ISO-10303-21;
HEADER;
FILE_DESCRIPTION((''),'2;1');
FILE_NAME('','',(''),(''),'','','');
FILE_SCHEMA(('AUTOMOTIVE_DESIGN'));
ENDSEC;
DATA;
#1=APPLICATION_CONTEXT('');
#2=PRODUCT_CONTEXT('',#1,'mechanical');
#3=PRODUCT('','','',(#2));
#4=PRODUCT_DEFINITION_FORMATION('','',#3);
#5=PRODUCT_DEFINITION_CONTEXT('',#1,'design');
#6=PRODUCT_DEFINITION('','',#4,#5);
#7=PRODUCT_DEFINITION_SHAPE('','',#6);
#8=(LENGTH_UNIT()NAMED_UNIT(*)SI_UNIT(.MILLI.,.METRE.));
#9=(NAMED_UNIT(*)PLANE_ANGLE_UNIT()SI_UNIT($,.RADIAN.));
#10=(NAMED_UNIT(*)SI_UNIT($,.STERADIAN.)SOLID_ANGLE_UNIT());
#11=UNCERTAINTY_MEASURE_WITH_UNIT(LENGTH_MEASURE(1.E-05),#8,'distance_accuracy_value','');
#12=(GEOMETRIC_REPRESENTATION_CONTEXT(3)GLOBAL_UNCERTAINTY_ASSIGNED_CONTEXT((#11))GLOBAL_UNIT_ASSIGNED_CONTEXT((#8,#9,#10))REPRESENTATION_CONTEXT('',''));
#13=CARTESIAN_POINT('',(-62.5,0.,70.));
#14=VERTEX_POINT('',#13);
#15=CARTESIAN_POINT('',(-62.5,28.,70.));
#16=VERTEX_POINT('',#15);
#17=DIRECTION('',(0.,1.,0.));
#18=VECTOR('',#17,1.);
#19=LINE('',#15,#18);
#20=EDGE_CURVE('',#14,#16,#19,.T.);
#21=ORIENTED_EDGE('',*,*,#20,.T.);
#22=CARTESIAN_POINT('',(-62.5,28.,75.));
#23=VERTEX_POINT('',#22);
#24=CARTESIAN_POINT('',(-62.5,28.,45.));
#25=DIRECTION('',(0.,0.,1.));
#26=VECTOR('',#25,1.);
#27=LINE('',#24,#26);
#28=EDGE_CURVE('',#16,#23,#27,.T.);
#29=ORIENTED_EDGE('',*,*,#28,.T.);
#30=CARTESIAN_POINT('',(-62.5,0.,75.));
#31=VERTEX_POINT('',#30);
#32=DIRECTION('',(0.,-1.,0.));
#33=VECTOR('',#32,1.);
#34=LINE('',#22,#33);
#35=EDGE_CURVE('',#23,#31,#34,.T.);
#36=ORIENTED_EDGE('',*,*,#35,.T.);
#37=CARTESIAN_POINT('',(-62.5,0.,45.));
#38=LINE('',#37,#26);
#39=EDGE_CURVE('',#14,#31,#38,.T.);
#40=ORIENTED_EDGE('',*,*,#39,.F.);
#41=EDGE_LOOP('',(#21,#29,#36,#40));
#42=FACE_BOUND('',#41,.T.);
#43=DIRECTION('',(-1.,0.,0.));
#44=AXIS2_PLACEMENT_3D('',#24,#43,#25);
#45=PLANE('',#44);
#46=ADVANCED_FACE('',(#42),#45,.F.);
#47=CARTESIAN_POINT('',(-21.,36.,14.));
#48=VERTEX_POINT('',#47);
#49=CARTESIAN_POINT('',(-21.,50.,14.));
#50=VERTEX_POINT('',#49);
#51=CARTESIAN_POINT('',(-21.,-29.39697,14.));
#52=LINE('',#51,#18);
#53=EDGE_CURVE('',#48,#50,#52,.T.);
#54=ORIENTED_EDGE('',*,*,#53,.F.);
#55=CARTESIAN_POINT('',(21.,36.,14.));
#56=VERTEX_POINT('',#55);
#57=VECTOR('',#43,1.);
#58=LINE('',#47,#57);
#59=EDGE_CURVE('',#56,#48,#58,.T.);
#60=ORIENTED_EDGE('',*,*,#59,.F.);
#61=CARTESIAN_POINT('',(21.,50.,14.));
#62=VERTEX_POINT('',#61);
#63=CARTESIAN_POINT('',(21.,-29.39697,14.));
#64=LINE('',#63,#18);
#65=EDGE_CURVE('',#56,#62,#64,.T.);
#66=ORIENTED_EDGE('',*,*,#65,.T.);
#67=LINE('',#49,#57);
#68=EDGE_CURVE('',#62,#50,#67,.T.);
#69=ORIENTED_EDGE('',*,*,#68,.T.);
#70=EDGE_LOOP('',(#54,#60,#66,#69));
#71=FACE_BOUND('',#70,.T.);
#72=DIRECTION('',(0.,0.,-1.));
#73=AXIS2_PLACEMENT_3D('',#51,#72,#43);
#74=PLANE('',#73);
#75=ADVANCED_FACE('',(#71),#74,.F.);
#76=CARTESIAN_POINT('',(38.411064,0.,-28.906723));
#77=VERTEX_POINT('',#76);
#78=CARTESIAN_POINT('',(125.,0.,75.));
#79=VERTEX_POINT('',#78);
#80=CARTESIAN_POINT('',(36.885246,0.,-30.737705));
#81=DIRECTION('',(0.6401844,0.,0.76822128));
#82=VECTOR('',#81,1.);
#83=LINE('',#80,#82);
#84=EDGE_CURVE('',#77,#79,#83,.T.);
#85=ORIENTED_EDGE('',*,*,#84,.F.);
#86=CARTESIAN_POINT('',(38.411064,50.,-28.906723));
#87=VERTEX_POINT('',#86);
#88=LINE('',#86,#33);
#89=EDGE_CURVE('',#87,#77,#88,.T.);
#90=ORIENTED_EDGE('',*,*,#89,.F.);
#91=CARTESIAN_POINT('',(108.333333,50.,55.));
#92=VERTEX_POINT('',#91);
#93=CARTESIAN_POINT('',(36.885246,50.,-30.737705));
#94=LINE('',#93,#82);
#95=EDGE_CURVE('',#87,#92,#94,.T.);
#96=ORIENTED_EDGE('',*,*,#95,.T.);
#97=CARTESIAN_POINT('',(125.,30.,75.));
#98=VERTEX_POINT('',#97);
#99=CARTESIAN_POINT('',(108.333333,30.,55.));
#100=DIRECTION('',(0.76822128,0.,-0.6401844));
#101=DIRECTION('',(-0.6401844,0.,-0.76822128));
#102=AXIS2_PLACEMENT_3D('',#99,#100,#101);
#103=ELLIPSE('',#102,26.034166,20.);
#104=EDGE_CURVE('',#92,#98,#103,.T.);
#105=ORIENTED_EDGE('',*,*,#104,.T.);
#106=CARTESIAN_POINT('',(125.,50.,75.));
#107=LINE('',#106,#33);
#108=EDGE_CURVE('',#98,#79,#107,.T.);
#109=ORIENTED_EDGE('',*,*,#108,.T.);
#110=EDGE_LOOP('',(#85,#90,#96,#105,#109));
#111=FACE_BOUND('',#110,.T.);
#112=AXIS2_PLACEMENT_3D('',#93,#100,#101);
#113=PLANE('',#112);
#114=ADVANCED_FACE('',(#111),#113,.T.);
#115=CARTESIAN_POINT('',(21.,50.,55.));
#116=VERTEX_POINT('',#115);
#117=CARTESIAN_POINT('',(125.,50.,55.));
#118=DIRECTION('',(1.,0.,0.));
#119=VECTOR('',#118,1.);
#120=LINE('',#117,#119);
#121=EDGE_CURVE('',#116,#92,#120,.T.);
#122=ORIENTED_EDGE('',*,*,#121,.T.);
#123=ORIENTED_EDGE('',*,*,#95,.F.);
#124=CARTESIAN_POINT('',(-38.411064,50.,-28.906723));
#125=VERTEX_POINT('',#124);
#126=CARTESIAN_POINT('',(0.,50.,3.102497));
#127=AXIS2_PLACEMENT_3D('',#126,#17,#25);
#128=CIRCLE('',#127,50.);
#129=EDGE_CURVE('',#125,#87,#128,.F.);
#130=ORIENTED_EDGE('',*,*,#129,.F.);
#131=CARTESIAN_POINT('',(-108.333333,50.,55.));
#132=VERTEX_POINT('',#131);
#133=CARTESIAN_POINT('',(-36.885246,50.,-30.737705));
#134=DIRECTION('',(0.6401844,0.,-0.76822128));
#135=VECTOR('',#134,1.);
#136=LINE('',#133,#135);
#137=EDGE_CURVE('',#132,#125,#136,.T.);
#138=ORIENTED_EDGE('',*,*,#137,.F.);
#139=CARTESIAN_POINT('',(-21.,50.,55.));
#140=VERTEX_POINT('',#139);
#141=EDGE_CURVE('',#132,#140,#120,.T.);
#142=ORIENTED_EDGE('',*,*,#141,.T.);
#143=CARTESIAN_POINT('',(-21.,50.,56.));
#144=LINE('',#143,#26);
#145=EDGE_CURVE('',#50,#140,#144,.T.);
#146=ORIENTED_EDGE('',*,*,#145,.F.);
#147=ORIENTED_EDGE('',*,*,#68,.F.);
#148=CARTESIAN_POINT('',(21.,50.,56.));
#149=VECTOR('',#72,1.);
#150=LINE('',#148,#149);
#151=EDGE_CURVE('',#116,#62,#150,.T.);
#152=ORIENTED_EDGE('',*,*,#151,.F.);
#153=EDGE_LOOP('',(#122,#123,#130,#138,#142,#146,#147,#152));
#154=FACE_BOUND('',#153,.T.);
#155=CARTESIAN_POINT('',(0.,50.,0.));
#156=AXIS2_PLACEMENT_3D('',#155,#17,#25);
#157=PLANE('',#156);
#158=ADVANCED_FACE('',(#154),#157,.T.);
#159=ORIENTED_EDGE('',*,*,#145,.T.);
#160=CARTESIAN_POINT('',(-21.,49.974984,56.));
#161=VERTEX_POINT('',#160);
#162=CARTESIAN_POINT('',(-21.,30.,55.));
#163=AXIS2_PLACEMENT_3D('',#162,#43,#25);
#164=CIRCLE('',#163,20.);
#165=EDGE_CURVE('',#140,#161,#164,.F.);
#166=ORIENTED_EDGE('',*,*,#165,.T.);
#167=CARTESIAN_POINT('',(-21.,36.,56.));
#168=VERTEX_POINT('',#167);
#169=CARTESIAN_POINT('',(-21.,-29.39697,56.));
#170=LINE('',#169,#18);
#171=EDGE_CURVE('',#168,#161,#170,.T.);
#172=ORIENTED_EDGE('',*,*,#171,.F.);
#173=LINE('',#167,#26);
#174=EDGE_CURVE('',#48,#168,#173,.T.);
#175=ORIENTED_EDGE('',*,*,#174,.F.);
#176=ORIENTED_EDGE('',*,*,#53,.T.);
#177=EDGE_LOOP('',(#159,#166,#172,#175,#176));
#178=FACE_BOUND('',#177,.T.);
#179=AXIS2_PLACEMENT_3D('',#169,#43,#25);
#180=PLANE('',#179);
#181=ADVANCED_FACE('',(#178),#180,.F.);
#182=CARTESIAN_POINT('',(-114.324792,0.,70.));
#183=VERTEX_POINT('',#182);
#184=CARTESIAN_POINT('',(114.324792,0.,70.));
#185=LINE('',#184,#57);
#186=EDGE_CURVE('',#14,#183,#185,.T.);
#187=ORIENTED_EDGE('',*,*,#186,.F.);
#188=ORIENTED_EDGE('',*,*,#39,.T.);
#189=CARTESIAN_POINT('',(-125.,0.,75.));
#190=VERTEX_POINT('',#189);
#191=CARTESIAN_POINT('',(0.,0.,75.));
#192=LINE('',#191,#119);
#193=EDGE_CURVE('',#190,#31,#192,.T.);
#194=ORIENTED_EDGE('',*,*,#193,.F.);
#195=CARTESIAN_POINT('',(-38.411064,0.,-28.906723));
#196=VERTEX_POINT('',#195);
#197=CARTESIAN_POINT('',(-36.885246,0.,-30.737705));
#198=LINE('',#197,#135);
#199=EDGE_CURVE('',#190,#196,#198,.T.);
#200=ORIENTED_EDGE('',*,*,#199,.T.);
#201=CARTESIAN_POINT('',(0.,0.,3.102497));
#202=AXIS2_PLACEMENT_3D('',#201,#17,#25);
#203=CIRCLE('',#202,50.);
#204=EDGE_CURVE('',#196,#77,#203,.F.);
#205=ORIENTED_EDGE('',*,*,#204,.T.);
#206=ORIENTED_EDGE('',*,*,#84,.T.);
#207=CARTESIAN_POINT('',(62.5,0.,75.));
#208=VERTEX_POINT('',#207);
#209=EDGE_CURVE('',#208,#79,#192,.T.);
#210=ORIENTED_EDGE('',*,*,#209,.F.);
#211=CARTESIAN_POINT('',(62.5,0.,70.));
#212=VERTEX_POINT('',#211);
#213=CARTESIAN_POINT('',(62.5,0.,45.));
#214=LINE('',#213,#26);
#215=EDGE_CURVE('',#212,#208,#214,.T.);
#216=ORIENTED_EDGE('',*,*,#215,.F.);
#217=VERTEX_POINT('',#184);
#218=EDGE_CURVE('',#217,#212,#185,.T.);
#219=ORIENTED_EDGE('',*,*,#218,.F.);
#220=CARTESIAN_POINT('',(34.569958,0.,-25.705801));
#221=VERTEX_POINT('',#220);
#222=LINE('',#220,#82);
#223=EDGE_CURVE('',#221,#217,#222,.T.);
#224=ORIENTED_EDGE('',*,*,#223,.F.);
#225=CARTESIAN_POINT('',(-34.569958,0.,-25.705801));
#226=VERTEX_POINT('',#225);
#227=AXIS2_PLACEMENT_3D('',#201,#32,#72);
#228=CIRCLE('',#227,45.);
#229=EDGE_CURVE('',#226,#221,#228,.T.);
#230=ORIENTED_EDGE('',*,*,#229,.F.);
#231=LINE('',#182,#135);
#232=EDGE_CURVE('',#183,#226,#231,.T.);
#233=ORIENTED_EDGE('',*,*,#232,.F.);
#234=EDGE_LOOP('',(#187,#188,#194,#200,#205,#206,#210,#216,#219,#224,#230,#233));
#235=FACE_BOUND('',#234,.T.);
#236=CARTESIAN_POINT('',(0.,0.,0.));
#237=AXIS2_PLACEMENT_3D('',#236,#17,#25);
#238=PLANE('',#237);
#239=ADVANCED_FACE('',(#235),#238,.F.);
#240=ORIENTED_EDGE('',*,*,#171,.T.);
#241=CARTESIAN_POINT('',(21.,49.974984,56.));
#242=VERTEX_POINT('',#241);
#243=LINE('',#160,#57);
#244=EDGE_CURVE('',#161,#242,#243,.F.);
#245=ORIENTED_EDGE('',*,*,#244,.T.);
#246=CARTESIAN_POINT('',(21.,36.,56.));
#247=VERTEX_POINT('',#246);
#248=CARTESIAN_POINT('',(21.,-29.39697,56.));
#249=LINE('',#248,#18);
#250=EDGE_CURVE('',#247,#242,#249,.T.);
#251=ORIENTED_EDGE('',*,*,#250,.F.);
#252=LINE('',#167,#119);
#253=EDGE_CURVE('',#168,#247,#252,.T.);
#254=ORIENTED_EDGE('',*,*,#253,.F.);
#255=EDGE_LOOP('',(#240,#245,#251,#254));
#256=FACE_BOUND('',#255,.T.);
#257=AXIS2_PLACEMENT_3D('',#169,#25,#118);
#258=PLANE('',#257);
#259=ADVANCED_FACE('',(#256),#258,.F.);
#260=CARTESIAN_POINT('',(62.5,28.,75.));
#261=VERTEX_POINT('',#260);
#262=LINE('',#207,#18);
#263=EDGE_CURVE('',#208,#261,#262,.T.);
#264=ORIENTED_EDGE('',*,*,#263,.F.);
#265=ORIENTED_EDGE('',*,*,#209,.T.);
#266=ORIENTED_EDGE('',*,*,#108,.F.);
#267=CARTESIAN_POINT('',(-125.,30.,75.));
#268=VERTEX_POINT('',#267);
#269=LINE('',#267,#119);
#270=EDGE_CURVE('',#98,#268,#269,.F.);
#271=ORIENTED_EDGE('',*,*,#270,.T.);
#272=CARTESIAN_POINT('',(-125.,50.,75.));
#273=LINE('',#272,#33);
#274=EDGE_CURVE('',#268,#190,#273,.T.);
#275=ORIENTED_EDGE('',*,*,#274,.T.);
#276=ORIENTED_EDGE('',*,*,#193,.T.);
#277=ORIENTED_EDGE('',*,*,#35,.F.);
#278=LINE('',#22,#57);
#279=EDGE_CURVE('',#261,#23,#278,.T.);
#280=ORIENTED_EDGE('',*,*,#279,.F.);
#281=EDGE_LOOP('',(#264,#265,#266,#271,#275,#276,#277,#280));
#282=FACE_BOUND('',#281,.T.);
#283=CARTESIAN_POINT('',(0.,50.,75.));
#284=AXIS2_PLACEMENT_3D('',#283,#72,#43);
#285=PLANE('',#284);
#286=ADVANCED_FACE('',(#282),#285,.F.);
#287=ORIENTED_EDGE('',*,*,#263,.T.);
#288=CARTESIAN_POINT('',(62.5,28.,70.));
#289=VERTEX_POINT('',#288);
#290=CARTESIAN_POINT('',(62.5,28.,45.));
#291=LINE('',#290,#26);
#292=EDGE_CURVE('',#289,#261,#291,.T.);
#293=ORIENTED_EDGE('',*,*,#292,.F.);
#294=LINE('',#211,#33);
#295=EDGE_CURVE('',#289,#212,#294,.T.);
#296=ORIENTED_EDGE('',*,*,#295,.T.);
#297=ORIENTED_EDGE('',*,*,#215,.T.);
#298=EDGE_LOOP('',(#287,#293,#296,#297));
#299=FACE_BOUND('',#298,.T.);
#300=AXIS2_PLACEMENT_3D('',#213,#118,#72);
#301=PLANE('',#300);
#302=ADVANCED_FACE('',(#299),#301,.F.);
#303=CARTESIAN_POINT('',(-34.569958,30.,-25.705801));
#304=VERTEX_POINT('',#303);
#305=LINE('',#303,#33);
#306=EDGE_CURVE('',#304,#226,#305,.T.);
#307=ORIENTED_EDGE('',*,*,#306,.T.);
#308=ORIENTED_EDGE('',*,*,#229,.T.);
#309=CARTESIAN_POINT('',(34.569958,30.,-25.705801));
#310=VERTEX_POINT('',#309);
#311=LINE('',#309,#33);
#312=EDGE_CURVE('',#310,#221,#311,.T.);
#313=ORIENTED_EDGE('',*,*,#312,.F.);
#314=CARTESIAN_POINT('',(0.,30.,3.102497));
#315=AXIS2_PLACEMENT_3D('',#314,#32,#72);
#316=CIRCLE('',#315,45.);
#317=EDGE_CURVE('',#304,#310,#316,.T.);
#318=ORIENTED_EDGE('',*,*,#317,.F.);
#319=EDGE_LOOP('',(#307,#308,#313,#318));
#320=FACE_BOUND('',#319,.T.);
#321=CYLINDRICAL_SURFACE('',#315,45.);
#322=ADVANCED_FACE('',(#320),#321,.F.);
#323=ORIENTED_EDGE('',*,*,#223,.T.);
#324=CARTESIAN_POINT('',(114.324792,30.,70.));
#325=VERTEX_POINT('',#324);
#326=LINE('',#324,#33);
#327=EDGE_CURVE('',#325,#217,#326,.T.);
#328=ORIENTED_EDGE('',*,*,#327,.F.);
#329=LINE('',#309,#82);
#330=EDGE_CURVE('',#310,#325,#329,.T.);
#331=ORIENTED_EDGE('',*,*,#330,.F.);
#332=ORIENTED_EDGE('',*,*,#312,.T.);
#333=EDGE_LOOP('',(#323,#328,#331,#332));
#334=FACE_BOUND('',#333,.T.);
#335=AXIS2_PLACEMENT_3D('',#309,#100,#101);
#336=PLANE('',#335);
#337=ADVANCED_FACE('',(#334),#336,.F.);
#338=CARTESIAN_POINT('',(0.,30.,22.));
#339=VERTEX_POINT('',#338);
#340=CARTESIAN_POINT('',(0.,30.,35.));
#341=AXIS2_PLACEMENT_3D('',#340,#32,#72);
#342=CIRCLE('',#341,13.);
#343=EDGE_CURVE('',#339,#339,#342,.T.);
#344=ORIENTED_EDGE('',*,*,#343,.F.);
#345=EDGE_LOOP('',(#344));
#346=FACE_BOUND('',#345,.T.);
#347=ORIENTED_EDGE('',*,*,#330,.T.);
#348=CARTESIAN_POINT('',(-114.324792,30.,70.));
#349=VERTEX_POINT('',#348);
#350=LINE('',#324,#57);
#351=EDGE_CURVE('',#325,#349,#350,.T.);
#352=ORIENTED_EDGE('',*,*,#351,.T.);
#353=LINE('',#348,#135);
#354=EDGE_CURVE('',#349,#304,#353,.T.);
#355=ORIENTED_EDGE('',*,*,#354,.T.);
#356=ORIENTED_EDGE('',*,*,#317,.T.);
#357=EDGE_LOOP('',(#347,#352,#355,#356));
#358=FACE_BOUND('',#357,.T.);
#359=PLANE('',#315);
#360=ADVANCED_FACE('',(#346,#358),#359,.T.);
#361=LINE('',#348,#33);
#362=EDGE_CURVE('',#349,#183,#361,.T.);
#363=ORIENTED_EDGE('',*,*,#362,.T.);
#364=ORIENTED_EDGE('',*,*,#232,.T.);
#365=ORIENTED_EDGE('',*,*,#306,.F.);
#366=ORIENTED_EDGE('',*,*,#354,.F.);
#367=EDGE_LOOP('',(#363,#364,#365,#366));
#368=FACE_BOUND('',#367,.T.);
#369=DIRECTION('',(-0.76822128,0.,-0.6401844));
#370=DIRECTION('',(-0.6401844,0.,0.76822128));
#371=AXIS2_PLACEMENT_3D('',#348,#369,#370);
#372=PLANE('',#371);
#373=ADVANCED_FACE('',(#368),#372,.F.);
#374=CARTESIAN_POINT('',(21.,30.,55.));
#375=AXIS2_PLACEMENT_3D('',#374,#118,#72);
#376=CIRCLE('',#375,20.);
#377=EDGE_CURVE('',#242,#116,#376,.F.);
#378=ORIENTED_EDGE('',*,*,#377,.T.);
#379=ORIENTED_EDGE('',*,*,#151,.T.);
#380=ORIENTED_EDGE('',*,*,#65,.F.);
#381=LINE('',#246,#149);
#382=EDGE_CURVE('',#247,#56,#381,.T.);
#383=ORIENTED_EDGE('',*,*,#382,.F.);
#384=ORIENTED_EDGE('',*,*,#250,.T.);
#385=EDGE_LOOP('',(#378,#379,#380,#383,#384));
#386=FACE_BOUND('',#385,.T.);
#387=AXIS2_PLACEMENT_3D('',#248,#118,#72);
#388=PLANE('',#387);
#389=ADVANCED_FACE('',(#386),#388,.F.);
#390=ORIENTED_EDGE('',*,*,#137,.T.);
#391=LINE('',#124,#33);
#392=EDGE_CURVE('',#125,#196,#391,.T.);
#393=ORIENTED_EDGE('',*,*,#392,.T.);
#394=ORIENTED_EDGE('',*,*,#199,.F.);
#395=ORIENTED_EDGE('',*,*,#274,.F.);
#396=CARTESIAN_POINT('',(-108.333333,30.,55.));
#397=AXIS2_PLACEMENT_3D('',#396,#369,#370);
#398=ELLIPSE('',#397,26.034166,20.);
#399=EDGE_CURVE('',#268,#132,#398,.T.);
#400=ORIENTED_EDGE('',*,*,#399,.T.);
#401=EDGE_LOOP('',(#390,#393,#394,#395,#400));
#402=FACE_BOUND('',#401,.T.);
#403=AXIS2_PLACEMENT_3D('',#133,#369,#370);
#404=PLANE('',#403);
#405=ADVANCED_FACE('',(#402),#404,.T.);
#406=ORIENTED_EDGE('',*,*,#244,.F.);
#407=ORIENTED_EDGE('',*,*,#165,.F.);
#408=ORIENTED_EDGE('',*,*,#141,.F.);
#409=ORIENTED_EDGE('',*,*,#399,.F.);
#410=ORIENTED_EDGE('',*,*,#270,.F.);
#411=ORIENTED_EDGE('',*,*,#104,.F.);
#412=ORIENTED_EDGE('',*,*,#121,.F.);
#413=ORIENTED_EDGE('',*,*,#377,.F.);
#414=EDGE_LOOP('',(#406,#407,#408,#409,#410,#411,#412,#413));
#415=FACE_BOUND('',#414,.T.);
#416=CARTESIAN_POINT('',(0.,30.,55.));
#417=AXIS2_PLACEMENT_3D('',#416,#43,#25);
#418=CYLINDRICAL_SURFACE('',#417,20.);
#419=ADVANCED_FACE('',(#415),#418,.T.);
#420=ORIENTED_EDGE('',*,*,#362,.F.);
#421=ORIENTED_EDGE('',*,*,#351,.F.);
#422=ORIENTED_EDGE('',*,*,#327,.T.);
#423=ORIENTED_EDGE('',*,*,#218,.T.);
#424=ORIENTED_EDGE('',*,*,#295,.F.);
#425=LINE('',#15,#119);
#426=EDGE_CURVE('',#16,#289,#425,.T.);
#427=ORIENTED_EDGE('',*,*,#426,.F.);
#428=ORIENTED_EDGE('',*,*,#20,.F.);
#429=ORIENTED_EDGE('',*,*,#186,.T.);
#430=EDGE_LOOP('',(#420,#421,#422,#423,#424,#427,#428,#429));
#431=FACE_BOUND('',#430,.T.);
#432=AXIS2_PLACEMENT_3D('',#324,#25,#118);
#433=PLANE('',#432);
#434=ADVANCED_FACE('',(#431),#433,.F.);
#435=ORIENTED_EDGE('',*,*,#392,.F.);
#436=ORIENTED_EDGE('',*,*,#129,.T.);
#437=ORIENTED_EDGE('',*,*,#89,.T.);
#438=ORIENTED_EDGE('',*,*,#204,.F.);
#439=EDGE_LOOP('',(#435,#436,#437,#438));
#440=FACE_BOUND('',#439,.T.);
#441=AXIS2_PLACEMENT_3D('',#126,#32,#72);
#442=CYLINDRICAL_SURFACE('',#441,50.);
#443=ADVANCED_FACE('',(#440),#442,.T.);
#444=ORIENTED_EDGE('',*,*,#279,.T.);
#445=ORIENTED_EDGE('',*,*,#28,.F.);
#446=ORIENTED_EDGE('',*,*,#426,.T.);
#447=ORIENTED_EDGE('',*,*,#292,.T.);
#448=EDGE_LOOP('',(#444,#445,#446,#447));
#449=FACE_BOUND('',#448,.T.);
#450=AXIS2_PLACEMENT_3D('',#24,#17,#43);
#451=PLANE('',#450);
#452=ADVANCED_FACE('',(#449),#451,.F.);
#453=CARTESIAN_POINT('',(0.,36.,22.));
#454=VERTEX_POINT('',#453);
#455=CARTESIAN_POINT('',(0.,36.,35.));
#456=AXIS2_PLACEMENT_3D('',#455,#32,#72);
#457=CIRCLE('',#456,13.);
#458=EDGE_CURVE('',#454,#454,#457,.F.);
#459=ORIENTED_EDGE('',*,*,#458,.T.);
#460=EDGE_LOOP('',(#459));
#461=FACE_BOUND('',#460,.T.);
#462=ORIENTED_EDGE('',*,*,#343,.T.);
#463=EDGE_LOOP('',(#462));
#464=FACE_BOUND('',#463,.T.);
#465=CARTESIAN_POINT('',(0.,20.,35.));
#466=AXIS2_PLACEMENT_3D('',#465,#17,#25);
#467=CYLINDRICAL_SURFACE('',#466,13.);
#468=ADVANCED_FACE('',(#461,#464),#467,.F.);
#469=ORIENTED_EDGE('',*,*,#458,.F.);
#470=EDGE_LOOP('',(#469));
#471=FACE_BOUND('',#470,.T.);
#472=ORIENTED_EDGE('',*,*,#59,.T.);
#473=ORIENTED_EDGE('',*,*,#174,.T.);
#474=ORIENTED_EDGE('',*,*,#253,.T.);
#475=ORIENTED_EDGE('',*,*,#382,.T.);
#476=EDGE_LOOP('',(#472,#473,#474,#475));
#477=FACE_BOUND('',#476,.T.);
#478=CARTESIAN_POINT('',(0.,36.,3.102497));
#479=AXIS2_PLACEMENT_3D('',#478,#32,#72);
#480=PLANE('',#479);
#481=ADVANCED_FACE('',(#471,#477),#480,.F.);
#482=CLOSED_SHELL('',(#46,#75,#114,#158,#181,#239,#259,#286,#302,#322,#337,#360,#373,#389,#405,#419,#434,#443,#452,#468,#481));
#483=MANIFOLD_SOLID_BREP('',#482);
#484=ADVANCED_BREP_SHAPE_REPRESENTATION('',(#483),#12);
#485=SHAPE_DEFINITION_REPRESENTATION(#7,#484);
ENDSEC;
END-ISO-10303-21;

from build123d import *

# Parameters (mm, degrees)
AUFSATZ_LINEAR_AUSTRAGEN1_DEPTH = 50
SKIZZE2_W                       = 125
SKIZZE2_H                       = 28
SCHNITT_LINEAR_AUSTRAGEN1_DEPTH = 30
SCHNITT_LINEAR_AUSTRAGEN2_DEPTH = 30
SKIZZE4_R                       = 13
SCHNITT_LINEAR_AUSTRAGEN3_DEPTH = 30
SKIZZE5_W                       = 42
SKIZZE5_H                       = 42
SCHNITT_LINEAR_AUSTRAGEN4_DEPTH = 14
VERRUNDUNG1_R                   = 20


with BuildPart() as part:
    # Skizze1 → Aufsatz-Linear austragen1 (new body)
    with BuildSketch(Plane(origin=(0, 0, 0), x_dir=(1, 0, 0), z_dir=(0, 1, 0))):
        with BuildLine():
            ThreePointArc((-38.41106398, 28.906723224), (0, 46.897503241), (38.41106398, 28.906723224))
            Line((38.41106398, 28.906723224), (125, -75))
            Line((125, -75), (-125, -75))
            Line((-125, -75), (-38.41106398, 28.906723224))
        make_face()
    extrude(amount=AUFSATZ_LINEAR_AUSTRAGEN1_DEPTH)

    # Skizze2 → Schnitt-Linear austragen1 (cut)
    with BuildSketch(Plane.XY.offset(75)):
        with Locations((0, 14)):
            Rectangle(SKIZZE2_W, SKIZZE2_H)
    extrude(amount=-SCHNITT_LINEAR_AUSTRAGEN1_DEPTH, mode=Mode.SUBTRACT)

    # Skizze3 → Schnitt-Linear austragen2 (cut)
    with BuildSketch(Plane.XZ):
        with BuildLine():
            Line((114.324791937, 70), (-114.324791937, 70))
            Line((-114.324791937, 70), (-34.569957582, -25.705801226))
            ThreePointArc((-34.569957582, -25.705801226), (0, -41.897503241), (34.569957582, -25.705801226))
            Line((34.569957582, -25.705801226), (114.324791937, 70))
        make_face()
    extrude(amount=-SCHNITT_LINEAR_AUSTRAGEN2_DEPTH, mode=Mode.SUBTRACT)

    # Skizze4 → Schnitt-Linear austragen3 (cut)
    with BuildSketch(Plane(origin=(0, 50, 0), x_dir=(1, 0, 0), z_dir=(0, 1, 0))):
        with Locations(Location((0, -35, 0), (0, 0, 270))):
            Circle(SKIZZE4_R)
    extrude(amount=-SCHNITT_LINEAR_AUSTRAGEN3_DEPTH, mode=Mode.SUBTRACT)

    # Skizze5 → Schnitt-Linear austragen4 (cut)
    with BuildSketch(Plane(origin=(0, 50, 0), x_dir=(1, 0, 0), z_dir=(0, 1, 0))):
        with Locations((0, -35)):
            Rectangle(SKIZZE5_W, SKIZZE5_H)
    extrude(amount=-SCHNITT_LINEAR_AUSTRAGEN4_DEPTH, mode=Mode.SUBTRACT)

    # Verrundung1
    # the kernel refuses this fillet: 20 mm, written as the material it takes off along each edge
    with BuildSketch(Plane(origin=(175, 50, 75), x_dir=(0, -1, 0), z_dir=(-1, 0, 0))) as verrundung1_piece_1:
        with BuildLine():
            CenterArc((VERRUNDUNG1_R, -VERRUNDUNG1_R), VERRUNDUNG1_R, 90, 90)
            Line((0, -VERRUNDUNG1_R), (0, 0))
            Line((0, 0), (VERRUNDUNG1_R, 0))
        make_face()
    extrude(amount=350, mode=Mode.SUBTRACT)


solid = part.part
